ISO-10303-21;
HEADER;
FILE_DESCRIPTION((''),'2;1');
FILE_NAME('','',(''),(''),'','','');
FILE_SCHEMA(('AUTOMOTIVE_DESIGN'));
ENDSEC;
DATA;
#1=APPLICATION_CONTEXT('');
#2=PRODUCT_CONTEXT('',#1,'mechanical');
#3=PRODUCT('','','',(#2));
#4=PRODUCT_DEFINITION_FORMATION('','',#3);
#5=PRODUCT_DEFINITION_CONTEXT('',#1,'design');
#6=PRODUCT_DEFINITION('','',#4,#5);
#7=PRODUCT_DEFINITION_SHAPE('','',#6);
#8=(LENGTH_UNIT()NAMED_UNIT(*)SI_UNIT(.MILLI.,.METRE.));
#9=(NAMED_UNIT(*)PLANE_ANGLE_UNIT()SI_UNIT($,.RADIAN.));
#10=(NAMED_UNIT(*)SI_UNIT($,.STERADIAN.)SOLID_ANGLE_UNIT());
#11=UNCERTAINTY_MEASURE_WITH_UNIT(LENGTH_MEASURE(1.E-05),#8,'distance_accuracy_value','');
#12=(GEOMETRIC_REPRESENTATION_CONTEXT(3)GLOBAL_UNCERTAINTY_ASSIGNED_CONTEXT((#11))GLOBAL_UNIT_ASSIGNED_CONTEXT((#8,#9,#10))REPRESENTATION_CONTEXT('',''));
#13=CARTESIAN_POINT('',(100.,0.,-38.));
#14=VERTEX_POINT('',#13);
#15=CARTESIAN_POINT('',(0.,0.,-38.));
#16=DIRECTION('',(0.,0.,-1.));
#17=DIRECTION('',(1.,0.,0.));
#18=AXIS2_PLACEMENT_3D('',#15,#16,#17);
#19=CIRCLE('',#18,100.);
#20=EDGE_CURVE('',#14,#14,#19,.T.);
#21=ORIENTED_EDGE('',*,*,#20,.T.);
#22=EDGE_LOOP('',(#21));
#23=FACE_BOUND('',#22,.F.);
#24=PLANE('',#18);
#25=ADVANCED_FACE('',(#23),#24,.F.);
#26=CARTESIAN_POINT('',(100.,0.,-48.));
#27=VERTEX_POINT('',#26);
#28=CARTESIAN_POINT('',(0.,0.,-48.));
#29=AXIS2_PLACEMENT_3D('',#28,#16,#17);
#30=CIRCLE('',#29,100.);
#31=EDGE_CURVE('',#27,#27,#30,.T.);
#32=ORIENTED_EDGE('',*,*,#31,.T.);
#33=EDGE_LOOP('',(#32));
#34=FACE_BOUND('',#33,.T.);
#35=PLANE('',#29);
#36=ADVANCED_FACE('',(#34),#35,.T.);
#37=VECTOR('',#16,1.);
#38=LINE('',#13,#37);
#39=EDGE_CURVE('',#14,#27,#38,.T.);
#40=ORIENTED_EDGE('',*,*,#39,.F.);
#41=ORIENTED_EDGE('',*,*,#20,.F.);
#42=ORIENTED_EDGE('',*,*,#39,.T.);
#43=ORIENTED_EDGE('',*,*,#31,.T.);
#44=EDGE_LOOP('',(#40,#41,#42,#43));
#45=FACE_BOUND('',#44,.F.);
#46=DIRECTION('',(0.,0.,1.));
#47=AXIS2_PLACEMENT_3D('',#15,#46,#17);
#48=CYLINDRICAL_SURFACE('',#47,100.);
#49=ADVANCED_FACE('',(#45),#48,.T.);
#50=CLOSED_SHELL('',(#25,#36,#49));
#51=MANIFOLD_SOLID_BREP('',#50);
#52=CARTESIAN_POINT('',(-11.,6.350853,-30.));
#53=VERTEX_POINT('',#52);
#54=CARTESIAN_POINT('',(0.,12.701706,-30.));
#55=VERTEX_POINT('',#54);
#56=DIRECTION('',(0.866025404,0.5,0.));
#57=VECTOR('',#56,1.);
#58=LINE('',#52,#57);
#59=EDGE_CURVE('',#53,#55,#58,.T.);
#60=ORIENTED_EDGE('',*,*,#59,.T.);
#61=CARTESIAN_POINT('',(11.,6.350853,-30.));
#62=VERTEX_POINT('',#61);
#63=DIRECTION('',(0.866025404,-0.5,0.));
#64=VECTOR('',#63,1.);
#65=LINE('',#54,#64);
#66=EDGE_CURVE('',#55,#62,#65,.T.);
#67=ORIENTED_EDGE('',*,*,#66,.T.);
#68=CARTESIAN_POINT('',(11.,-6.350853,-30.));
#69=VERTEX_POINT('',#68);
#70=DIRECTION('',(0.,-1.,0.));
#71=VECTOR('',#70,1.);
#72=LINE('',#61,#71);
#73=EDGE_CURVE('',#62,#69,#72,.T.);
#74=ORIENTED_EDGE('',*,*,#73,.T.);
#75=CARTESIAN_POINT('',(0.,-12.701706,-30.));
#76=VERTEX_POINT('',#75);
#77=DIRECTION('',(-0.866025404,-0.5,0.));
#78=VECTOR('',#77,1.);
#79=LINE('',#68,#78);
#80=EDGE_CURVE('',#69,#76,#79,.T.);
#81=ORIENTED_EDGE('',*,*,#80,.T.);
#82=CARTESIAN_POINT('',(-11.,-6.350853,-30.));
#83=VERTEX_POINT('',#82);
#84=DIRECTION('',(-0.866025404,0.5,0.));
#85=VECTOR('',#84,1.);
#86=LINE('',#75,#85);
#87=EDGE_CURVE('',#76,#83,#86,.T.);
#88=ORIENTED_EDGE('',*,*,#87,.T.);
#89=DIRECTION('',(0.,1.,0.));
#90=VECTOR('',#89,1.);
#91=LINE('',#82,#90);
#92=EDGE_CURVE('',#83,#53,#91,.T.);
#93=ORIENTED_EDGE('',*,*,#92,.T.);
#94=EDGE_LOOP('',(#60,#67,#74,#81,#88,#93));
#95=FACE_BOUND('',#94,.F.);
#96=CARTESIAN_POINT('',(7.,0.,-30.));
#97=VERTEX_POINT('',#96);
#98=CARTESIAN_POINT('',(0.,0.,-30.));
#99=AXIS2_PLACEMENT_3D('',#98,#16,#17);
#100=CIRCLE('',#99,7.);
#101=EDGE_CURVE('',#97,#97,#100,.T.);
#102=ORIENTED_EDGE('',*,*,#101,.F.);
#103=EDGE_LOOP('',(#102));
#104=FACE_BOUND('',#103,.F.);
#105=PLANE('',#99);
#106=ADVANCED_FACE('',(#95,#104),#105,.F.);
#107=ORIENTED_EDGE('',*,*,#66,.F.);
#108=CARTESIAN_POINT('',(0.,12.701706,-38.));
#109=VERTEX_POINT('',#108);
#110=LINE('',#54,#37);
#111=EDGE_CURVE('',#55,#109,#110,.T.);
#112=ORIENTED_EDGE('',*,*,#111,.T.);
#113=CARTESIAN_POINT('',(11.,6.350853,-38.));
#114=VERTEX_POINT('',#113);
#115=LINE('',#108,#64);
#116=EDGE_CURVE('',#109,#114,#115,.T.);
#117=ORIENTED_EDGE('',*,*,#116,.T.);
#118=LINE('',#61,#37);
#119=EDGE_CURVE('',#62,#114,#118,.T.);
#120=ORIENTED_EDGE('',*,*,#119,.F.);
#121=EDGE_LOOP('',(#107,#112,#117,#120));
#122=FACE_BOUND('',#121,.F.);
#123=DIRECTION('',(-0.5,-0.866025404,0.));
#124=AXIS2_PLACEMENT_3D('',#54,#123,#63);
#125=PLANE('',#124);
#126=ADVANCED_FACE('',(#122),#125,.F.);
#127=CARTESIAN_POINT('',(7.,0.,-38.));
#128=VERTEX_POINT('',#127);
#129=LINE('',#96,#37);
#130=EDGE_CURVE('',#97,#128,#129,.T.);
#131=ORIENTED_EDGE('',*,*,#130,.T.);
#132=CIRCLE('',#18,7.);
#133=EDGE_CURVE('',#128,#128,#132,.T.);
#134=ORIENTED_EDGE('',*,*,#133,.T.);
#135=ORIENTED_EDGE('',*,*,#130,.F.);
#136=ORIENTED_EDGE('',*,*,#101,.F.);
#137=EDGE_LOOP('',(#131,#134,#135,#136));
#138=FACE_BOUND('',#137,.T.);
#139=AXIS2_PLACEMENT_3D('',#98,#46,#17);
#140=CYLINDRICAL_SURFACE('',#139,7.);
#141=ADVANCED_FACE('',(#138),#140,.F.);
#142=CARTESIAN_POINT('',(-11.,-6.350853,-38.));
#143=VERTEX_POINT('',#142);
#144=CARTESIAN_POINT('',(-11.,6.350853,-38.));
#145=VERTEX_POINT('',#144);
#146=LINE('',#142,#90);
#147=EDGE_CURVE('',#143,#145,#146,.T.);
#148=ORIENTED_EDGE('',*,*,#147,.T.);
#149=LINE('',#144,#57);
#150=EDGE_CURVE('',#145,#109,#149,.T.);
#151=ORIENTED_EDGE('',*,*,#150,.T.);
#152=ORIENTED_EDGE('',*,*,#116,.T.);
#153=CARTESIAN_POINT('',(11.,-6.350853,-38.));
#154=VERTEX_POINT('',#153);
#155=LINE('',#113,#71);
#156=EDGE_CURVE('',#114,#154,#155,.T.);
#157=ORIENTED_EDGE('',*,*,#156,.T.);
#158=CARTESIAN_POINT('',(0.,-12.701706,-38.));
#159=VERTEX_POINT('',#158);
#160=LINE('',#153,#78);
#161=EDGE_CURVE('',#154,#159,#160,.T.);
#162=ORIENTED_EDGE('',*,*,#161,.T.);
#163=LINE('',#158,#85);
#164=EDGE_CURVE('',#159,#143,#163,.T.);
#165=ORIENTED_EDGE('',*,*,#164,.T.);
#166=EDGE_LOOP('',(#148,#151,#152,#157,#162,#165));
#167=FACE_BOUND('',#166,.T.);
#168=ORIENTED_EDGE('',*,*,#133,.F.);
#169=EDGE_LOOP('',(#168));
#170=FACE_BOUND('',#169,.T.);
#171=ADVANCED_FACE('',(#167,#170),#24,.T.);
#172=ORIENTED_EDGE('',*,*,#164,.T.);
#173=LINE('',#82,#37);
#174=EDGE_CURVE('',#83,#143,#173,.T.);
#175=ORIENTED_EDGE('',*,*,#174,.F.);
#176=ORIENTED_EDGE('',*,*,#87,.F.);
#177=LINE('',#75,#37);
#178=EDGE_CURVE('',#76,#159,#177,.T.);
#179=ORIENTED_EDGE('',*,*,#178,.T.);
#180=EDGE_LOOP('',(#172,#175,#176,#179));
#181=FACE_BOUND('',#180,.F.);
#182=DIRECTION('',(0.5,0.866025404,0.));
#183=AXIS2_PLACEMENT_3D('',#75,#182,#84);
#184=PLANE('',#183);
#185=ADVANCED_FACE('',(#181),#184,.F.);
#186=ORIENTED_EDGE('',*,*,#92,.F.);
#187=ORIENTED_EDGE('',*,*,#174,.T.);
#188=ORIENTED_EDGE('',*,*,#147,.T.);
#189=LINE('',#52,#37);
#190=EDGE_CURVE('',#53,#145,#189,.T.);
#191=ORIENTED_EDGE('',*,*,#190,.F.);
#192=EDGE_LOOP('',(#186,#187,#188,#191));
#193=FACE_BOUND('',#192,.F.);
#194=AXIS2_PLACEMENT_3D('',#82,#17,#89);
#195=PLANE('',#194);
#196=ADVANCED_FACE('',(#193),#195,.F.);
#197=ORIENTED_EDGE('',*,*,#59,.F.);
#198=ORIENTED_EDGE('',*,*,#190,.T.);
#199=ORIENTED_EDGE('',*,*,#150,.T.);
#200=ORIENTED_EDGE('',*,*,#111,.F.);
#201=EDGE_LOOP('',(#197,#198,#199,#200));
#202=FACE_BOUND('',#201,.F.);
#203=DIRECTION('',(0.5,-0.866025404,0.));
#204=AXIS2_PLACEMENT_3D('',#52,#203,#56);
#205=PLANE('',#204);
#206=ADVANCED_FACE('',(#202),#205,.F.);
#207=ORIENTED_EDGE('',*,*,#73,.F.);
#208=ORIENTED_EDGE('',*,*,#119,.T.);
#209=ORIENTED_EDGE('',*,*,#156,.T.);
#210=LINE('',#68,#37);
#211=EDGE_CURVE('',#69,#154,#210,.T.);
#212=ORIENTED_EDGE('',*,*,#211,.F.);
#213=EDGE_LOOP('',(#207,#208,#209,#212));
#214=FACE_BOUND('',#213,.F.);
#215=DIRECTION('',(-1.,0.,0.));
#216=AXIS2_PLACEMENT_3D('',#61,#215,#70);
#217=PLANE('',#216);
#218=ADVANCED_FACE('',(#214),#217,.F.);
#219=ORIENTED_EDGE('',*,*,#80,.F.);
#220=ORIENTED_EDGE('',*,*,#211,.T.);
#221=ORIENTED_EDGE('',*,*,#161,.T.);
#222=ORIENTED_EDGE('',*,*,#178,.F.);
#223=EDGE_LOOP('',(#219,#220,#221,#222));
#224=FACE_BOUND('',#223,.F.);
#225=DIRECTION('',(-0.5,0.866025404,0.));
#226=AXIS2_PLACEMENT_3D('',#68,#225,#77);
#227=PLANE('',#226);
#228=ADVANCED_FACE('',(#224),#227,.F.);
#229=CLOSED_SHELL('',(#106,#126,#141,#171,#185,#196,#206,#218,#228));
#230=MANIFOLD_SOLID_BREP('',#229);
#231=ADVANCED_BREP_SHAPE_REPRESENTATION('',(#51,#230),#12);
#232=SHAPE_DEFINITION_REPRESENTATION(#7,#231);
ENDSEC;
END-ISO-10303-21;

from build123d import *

# Parameters (mm, degrees)
F0_R     = 27.5
F1_DEPTH = 6
F2_R     = 7
F3_DEPTH = 30
F4_R     = 7
F5_DEPTH = 8
F6_R     = 100
F6_R_2   = 7
F7_DEPTH = 10


with BuildPart() as f1:
    # F0 (on Top) → F1 (new body)
    with BuildSketch(Plane.XY):
        Circle(F0_R)
    extrude(amount=F1_DEPTH)

    # F2 (on face) → F3 (join)
    with BuildSketch(Plane.XY):
        Circle(F2_R)
    extrude(amount=-F3_DEPTH)


with BuildPart() as f5:
    # F4 (on face) → F5 (new body)
    with BuildSketch(Plane(origin=(0, 0, -30), x_dir=(1, 0, 0), z_dir=(0, 0, -1))):
        Polygon((11, -6.3508529611), (11, 6.3508529611), (0, 12.7017059222), (-11, 6.3508529611), (-11, -6.3508529611), (0, -12.7017059222), align=None)
        Circle(F4_R, mode=Mode.SUBTRACT)
    extrude(amount=F5_DEPTH)


with BuildPart() as f7:
    # F6 (on face) → F7 (new body)
    with BuildSketch(Plane(origin=(0, 0, -38), x_dir=(1, 0, 0), z_dir=(0, 0, -1))):
        Circle(F6_R)
        Polygon((11, -6.3508529611), (0, -12.7017059222), (-11, -6.3508529611), (-11, 6.3508529611), (0, 12.7017059222), (11, 6.3508529611), align=None, mode=Mode.SUBTRACT)
        Polygon((-11, -6.3508529611), (0, -12.7017059222), (11, -6.3508529611), (11, 6.3508529611), (0, 12.7017059222), (-11, 6.3508529611), align=None)
        Circle(F6_R_2, mode=Mode.SUBTRACT)
        Circle(F6_R_2)
    extrude(amount=F7_DEPTH)


solid = Compound([f5.part, f7.part])
